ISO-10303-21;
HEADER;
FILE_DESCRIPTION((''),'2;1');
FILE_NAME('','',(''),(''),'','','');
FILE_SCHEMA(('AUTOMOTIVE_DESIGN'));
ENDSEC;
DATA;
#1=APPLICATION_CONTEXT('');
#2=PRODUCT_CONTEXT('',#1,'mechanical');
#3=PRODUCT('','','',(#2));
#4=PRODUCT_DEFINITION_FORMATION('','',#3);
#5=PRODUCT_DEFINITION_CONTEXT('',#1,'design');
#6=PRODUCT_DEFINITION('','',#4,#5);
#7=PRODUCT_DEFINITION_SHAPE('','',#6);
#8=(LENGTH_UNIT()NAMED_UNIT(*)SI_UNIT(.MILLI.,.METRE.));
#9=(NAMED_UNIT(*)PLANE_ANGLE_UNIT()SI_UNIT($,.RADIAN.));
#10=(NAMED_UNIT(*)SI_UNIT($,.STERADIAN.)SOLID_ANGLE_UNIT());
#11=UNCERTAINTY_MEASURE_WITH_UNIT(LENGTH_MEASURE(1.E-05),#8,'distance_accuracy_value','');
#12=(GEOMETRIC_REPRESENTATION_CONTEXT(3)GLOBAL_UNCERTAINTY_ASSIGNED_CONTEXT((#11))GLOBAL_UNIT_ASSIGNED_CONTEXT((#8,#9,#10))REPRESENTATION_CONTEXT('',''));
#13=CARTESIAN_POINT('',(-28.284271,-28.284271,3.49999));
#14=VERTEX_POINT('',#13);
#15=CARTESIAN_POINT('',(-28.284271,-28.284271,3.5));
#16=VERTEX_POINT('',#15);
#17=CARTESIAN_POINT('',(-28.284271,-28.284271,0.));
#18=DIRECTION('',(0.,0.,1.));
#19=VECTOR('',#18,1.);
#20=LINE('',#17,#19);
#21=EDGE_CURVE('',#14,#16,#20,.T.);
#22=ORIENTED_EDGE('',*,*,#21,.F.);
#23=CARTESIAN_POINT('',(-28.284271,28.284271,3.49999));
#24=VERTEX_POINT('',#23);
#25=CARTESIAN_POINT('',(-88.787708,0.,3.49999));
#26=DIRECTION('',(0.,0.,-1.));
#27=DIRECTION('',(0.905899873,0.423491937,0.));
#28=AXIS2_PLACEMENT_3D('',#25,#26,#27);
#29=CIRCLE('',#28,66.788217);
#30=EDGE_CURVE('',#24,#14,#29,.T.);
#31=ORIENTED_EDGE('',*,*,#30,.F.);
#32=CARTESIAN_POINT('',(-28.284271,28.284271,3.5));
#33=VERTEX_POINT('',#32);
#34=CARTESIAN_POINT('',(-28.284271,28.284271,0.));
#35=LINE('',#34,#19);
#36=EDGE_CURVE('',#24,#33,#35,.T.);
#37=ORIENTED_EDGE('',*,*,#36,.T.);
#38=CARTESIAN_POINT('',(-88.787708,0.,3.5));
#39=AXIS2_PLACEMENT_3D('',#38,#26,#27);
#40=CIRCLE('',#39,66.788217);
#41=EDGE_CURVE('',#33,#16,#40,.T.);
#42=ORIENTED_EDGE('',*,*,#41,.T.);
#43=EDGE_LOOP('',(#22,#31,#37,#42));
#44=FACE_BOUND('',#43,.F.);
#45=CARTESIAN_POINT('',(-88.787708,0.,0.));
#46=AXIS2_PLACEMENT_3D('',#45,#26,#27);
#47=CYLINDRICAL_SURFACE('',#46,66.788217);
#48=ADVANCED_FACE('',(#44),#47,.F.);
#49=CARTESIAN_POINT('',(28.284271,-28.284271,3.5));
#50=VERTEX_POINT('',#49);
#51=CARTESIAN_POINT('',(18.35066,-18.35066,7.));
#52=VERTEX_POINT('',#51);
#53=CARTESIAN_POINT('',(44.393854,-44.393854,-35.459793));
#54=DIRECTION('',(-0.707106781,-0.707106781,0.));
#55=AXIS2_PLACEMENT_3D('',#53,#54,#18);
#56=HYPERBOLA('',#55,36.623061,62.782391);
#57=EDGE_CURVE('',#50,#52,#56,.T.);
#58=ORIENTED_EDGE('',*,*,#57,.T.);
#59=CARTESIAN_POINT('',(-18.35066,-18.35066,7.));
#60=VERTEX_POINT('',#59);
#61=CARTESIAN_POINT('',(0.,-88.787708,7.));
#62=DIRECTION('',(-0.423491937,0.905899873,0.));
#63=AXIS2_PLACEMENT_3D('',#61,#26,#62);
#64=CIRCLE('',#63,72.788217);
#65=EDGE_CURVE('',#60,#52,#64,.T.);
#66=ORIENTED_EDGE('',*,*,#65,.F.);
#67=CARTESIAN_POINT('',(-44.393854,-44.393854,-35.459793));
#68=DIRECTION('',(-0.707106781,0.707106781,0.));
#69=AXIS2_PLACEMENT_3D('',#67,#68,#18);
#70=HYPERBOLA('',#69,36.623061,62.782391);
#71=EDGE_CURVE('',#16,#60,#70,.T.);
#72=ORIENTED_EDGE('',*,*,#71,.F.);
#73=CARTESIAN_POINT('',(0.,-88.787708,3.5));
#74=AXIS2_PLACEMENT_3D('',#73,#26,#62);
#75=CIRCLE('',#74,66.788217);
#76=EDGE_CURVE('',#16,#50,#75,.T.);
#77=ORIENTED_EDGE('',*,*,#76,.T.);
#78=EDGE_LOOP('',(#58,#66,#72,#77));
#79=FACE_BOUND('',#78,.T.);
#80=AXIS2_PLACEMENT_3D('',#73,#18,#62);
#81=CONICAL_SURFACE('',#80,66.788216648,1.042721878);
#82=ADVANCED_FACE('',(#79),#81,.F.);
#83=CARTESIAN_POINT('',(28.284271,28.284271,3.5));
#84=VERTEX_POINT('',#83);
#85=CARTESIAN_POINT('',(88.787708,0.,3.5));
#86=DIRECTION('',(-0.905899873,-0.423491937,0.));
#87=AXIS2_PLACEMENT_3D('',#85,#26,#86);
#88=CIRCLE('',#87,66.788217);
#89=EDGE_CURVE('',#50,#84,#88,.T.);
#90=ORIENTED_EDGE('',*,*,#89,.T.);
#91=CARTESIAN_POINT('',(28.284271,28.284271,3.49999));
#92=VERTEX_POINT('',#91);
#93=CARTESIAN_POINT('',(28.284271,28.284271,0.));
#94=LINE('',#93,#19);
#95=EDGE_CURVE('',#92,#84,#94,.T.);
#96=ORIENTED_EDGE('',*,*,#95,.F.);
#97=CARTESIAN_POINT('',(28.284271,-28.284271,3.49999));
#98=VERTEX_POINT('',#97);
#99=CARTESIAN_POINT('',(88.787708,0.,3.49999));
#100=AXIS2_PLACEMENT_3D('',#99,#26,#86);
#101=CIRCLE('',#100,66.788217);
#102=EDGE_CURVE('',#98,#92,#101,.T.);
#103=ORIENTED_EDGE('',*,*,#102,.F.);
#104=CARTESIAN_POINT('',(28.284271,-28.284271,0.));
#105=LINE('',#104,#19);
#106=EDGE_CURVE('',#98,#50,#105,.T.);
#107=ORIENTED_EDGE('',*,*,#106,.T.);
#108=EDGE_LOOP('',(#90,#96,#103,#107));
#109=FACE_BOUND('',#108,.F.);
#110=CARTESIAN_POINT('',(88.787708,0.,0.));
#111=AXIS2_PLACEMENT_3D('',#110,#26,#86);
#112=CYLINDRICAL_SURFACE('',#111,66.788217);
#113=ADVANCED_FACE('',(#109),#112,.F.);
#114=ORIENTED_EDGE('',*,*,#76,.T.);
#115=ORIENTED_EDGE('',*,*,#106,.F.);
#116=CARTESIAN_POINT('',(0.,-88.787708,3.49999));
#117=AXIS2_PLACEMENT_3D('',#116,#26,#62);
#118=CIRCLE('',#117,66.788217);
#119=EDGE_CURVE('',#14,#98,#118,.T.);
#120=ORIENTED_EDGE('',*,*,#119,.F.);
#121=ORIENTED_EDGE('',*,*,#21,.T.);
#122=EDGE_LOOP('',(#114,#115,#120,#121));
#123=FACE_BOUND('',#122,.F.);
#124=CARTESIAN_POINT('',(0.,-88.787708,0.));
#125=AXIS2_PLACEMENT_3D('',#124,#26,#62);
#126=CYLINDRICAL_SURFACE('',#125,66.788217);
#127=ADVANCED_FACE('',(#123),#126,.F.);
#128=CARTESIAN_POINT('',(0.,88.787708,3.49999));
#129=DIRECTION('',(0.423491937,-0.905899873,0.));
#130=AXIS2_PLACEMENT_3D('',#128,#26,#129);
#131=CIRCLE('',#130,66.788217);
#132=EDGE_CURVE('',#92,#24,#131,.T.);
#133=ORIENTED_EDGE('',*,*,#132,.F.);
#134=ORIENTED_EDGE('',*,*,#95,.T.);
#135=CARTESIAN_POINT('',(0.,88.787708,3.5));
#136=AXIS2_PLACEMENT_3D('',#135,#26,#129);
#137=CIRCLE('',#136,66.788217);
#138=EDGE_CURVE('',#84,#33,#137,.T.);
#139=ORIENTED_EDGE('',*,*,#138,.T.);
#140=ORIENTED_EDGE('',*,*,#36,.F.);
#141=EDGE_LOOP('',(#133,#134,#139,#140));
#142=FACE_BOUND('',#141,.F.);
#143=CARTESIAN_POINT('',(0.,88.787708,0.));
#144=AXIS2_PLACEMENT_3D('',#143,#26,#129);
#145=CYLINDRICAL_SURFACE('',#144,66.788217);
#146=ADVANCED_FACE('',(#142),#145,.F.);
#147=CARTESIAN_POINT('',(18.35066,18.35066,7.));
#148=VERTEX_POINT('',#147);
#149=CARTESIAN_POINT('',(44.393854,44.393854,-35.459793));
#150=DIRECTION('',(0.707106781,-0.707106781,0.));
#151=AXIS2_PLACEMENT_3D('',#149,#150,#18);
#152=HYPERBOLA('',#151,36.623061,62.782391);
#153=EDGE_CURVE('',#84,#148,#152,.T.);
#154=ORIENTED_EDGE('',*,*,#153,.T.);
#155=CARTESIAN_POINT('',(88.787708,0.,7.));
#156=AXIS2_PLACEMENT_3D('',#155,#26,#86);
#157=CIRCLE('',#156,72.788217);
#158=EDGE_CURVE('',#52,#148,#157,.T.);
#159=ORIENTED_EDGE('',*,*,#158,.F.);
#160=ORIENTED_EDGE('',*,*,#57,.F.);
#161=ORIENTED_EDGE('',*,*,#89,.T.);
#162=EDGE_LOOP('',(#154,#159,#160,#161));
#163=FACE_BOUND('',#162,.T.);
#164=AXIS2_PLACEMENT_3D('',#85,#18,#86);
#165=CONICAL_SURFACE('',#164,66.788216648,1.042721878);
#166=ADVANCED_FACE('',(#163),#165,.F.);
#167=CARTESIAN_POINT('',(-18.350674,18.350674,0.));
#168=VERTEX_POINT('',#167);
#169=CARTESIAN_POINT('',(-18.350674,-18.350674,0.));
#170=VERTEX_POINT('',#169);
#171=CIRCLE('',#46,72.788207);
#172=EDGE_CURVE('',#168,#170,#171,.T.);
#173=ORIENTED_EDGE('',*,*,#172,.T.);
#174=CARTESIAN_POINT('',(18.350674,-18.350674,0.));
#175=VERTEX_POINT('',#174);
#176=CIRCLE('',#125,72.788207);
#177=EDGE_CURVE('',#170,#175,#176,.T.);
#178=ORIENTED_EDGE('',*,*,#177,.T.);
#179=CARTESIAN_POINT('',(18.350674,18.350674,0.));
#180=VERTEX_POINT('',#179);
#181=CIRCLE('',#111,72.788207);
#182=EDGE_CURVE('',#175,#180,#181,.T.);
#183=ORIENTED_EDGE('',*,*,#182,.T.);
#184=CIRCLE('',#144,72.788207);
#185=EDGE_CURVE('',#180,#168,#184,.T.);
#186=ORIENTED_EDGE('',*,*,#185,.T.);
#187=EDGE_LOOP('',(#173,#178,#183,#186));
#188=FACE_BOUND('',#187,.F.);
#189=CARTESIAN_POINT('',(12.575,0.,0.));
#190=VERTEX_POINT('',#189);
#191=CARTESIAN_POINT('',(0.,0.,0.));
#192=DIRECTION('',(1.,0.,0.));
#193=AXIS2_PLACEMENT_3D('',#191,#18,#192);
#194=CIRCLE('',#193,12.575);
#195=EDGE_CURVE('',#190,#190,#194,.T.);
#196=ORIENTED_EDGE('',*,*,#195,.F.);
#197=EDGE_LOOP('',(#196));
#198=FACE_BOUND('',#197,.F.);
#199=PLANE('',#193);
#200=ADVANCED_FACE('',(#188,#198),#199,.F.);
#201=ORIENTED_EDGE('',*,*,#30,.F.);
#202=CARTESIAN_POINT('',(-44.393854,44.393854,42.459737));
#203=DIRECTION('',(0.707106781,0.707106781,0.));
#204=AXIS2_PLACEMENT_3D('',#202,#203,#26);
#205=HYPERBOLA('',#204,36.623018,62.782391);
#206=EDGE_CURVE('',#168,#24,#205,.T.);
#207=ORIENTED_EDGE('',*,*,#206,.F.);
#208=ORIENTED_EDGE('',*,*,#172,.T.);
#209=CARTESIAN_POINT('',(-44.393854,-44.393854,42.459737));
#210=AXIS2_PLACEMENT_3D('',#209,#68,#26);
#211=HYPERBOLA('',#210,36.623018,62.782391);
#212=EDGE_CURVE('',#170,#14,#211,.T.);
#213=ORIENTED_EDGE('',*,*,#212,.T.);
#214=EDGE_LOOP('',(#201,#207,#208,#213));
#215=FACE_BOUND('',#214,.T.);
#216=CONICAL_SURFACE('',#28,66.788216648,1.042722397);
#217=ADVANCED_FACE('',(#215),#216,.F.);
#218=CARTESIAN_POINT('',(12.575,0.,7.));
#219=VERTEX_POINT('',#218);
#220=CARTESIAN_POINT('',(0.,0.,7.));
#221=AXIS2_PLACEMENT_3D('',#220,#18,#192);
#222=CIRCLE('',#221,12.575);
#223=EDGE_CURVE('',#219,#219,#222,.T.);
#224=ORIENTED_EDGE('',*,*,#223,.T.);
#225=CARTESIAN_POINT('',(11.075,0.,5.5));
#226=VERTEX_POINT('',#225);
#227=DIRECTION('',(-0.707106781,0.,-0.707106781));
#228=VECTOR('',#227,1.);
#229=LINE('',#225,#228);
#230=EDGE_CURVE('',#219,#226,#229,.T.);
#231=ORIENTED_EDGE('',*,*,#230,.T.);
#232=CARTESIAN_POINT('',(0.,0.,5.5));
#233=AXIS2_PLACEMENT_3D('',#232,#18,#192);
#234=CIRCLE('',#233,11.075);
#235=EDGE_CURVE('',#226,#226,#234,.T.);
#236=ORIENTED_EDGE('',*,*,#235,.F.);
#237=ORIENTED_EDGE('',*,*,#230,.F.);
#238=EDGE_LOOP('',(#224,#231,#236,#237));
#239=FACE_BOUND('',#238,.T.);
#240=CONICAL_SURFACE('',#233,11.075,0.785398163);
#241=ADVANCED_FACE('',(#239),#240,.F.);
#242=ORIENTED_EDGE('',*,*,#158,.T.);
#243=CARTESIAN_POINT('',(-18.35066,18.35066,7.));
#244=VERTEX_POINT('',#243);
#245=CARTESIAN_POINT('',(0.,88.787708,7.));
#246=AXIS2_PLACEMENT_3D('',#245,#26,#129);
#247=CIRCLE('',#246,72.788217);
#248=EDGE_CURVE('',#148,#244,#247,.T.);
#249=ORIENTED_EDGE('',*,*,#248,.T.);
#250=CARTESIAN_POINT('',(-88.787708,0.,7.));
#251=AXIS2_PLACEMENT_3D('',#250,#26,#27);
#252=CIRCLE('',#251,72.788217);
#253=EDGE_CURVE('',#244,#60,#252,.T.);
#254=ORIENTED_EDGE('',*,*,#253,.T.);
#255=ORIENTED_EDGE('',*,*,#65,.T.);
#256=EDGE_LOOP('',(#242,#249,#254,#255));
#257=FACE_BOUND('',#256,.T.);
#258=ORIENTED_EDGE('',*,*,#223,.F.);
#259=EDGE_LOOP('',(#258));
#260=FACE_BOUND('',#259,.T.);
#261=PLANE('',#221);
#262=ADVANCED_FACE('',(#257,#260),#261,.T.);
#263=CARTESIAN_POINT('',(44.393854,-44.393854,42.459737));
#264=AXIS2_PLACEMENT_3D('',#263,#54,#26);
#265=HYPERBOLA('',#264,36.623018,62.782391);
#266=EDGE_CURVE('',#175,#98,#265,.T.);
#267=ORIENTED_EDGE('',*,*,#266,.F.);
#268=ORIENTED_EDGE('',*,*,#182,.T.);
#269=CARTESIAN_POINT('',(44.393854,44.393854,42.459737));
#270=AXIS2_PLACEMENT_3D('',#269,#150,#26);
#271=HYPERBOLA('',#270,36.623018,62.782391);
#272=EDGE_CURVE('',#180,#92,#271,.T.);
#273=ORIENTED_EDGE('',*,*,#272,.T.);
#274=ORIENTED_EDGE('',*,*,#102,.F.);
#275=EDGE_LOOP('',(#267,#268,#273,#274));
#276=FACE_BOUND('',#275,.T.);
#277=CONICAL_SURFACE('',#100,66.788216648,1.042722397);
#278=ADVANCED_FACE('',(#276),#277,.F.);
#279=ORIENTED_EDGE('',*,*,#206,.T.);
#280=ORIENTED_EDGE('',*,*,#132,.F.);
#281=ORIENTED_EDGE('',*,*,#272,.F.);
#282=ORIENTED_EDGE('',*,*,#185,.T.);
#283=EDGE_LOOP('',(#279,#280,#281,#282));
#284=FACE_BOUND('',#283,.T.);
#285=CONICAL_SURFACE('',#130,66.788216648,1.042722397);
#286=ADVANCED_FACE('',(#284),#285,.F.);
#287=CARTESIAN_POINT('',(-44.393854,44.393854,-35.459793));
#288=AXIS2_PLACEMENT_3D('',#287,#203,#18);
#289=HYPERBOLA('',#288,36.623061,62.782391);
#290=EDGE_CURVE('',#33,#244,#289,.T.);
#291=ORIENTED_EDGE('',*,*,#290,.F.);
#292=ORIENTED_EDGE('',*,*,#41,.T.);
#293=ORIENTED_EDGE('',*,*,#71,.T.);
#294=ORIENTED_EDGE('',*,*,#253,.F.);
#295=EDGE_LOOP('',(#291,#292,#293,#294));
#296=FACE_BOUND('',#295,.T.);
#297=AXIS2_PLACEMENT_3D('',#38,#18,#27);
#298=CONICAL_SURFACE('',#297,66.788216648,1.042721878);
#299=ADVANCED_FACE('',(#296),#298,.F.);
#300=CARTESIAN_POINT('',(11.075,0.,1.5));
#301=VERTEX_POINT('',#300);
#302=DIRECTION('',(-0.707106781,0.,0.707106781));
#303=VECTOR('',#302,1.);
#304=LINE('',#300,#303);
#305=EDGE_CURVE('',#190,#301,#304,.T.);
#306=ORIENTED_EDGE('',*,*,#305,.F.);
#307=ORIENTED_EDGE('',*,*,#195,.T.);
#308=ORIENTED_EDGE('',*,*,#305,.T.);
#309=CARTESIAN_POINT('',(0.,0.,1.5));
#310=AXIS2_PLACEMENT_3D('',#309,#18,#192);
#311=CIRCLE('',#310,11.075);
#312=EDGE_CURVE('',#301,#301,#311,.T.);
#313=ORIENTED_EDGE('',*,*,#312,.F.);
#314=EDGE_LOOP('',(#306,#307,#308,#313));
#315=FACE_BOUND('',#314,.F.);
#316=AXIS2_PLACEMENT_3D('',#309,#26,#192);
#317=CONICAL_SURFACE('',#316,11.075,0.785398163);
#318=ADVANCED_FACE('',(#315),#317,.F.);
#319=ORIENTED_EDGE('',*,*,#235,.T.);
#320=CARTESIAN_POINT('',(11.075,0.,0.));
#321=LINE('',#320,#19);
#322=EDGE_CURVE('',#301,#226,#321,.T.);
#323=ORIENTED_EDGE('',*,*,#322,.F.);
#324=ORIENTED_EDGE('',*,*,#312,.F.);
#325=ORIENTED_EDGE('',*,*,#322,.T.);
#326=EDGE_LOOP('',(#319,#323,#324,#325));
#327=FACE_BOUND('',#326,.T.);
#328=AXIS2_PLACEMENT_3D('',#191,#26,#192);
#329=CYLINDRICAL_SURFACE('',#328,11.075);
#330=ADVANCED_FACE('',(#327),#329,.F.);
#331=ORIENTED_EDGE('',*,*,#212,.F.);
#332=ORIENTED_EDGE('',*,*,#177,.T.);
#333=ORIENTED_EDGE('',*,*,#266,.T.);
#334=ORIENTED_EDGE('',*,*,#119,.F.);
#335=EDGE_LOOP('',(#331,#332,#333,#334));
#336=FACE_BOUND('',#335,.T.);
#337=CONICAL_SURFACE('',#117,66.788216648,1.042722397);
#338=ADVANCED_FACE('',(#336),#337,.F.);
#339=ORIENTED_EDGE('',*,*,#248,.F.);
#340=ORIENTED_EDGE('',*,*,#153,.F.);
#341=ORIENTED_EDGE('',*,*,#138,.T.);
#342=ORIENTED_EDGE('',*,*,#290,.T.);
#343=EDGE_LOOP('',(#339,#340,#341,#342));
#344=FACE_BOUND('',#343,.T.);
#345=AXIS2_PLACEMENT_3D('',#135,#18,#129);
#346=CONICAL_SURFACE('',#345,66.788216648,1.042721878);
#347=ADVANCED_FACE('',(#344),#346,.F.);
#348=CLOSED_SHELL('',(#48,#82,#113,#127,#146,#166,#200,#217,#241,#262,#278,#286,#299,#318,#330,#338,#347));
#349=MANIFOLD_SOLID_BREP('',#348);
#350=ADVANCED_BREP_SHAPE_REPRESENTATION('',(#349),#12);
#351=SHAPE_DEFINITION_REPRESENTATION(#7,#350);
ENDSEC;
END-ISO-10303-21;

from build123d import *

# Parameters (mm, degrees)
F0_R     = 11.075
F1_DEPTH = 7
F2_SIZE2 = 6
F2_SIZE  = 3.5
F3_SIZE2 = 3.49999
F3_SIZE  = 5.99999
F4_SIZE  = 1.5


# Not quite as in the source:
# - a fillet or chamfer is up to 0.001 mm smaller than in the source, because OpenCascade refuses the exact size


with BuildPart() as f1:
    # F0 (on Top) → F1 (new body)
    with BuildSketch(Plane.XY):
        with BuildLine():
            ThreePointArc((28.2842712475, -28.2842712475), (21.9994915516, 0), (28.2842712475, 28.2842712475))
            ThreePointArc((28.2842712475, 28.2842712475), (0, 21.9994915516), (-28.2842712475, 28.2842712475))
            ThreePointArc((-28.2842712475, 28.2842712475), (-21.9994915516, 0), (-28.2842712475, -28.2842712475))
            ThreePointArc((-28.2842712475, -28.2842712475), (0, -21.9994915516), (28.2842712475, -28.2842712475))
        make_face()
        Circle(F0_R, mode=Mode.SUBTRACT)
    extrude(amount=F1_DEPTH)

    # F2
    f2_edges = [f1.edges().sort_by_distance(p)[0] for p in [
        (0, -21.999492, 7),
        (-21.999492, 0, 7),
        (0, 21.999492, 7),
        (21.999492, 0, 7),
    ]]
    chamfer(f2_edges, length=F2_SIZE, length2=F2_SIZE2)

    # F3 (size 6 and 3.5 in the source; OpenCascade refuses exactly that, so slightly less here)
    f3_edges = [f1.edges().sort_by_distance(p)[0] for p in [
        (-21.999492, 0, 0),
        (0, -21.999492, 0),
        (21.999492, 0, 0),
        (0, 21.999492, 0),
    ]]
    f3_side = f1.faces().sort_by_distance((0, -21.199492, 0))[0]
    chamfer(f3_edges, length=F3_SIZE, length2=F3_SIZE2, reference=f3_side)

    # F4
    f4_edges = [f1.edges().sort_by_distance(p)[0] for p in [
        (-11.075, 0, 0),
        (-11.075, 0, 7),
    ]]
    chamfer(f4_edges, length=F4_SIZE)


solid = f1.part
